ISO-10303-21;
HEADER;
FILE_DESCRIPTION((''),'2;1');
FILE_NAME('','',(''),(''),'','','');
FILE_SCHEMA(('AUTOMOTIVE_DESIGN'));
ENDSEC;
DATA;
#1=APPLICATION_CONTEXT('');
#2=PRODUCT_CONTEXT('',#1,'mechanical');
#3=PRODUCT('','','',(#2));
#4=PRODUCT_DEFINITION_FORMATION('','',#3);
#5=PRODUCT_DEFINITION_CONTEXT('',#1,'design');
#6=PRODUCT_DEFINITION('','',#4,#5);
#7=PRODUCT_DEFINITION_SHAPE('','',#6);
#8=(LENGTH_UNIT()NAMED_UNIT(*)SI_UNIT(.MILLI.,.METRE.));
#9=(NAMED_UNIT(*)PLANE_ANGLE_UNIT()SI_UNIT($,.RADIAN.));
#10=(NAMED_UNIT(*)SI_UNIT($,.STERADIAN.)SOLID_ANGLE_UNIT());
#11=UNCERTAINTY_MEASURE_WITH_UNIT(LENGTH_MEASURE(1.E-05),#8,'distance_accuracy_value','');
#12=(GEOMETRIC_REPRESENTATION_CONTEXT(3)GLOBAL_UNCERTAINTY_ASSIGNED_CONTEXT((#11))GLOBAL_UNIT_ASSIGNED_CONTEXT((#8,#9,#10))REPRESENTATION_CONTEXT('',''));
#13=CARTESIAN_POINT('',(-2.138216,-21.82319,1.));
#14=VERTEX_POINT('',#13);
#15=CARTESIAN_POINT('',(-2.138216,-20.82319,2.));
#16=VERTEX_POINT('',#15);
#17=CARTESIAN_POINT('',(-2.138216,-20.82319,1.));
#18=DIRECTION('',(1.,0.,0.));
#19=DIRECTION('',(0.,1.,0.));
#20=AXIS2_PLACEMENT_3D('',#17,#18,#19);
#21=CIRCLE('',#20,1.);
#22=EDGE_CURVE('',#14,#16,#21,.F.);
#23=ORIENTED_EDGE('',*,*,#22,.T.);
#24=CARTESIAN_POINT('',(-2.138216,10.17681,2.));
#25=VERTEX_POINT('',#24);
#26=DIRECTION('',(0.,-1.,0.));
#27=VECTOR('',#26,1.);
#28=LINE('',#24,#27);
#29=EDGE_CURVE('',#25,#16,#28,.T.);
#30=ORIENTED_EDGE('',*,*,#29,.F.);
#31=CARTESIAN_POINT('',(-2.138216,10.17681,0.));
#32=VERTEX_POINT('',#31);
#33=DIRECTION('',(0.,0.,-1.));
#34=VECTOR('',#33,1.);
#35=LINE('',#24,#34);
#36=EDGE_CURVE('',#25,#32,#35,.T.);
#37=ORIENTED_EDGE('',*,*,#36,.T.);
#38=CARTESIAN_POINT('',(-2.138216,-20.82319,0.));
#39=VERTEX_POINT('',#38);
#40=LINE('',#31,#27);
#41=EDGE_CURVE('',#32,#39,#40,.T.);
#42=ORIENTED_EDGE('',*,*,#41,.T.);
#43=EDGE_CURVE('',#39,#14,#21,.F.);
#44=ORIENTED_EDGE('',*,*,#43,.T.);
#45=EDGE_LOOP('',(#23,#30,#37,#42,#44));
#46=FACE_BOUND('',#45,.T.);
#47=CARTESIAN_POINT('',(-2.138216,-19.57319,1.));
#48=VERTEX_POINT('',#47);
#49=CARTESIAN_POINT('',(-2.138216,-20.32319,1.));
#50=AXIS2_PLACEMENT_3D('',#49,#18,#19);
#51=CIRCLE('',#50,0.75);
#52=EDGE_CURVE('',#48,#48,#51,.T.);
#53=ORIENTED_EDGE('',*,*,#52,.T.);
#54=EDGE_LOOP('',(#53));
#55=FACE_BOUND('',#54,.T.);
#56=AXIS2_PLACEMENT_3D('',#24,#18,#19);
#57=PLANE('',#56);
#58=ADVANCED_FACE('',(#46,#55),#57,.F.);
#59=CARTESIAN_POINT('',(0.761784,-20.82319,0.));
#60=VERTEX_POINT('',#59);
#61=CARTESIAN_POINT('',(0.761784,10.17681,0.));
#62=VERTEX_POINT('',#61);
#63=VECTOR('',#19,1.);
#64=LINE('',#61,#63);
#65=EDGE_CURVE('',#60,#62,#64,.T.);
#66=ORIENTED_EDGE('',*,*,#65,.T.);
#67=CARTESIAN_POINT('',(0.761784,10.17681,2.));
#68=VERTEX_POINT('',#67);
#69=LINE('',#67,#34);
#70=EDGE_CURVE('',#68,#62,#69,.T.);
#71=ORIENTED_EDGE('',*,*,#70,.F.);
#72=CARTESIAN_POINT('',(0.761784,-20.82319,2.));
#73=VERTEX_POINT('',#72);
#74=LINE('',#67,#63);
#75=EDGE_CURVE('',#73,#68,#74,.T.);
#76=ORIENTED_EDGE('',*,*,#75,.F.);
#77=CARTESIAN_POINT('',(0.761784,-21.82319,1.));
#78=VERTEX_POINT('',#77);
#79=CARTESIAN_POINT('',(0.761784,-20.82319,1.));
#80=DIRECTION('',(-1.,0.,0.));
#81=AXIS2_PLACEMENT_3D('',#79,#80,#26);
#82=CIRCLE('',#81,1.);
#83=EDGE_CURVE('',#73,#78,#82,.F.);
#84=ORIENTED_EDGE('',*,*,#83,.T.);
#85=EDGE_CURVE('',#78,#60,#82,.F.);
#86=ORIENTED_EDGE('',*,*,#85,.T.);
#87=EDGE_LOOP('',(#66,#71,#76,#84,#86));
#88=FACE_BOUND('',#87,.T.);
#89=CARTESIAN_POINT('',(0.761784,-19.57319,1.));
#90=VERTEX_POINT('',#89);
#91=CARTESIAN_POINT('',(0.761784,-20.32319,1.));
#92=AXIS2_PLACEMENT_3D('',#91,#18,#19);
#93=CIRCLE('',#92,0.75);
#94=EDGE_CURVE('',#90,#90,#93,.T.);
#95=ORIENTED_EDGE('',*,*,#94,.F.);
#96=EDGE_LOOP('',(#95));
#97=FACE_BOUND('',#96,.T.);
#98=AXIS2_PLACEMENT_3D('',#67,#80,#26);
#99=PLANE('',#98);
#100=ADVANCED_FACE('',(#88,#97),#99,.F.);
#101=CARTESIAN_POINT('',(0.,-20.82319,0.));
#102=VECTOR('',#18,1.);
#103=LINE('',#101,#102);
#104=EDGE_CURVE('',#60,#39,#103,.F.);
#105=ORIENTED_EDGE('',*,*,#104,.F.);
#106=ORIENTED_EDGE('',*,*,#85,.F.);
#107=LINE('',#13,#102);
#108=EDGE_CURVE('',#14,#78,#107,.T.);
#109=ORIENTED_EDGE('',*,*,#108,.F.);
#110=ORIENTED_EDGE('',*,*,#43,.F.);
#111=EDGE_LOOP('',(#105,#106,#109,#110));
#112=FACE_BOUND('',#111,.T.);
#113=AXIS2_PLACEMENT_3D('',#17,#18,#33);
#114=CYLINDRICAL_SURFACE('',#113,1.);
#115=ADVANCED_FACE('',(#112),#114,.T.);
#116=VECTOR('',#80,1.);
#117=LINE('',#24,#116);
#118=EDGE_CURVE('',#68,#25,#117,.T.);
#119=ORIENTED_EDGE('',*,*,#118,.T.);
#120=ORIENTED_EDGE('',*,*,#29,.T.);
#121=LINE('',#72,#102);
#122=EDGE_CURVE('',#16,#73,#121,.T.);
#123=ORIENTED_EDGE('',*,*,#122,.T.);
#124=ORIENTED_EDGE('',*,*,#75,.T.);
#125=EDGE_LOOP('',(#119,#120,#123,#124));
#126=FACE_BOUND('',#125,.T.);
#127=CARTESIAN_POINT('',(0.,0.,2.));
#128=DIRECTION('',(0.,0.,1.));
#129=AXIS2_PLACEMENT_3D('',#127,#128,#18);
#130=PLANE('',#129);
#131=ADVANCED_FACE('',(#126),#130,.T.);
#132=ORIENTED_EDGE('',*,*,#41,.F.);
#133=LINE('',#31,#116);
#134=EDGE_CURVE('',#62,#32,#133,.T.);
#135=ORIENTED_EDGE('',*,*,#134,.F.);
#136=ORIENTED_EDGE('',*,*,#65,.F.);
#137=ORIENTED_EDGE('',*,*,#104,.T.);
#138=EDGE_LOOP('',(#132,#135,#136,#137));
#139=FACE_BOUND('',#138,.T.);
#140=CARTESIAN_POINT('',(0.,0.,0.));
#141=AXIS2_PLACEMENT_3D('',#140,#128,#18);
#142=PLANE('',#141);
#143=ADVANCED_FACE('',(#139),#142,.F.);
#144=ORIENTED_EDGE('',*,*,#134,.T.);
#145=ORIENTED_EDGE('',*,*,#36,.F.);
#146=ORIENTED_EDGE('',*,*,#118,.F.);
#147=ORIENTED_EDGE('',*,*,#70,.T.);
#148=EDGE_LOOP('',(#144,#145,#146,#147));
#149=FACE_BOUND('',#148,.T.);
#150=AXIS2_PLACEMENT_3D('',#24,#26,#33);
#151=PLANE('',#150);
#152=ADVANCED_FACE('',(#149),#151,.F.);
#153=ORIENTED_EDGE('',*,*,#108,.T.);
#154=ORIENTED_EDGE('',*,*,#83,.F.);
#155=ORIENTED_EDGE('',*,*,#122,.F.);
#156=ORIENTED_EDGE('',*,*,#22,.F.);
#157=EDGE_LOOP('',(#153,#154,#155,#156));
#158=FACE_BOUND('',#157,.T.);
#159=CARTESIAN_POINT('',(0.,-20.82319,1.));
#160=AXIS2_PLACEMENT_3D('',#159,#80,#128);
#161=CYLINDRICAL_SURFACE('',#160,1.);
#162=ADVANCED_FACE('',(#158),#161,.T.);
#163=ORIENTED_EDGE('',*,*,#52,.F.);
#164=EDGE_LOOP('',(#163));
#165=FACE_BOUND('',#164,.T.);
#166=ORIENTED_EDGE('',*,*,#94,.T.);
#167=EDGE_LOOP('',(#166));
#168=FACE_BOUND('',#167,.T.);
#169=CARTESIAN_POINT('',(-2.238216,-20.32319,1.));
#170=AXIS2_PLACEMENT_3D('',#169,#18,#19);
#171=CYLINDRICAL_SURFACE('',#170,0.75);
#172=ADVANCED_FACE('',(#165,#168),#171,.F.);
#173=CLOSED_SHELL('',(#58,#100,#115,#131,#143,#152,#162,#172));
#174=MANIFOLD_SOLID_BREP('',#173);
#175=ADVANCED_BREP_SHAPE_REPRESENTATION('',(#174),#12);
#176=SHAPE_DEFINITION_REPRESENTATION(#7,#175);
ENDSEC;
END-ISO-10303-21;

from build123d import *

# Parameters (mm, degrees)
ESQUISSE1_W             = 2.9
ESQUISSE1_H             = 32
BOSS_EXTRU_1_DEPTH      = 2
CONG_1_R                = 1
ESQUISSE2_R             = 0.75
ENL_V_MAT_EXTRU_1_DEPTH = 3


with BuildPart() as part:
    # Esquisse1 → Boss.-Extru.1 (new body)
    with BuildSketch(Plane.XY):
        with Locations((-0.688215542, -5.823189522)):
            Rectangle(ESQUISSE1_W, ESQUISSE1_H)
    extrude(amount=BOSS_EXTRU_1_DEPTH)

    # Congé1
    cong_1_edges = [part.edges().sort_by_distance(p)[0] for p in [
        (-0.688215542, -21.823189522, 2),
        (-0.688215542, -21.823189522, 0),
    ]]
    fillet(cong_1_edges, radius=CONG_1_R - 0.0001)  # a hair under: the kernel refuses the full size

    # Esquisse2 → Enlèv. mat.-Extru.1 (cut)
    with BuildSketch(Plane(origin=(0.761784458, 0, 0), x_dir=(0, 0, -1), z_dir=(1, 0, 0))):
        with Locations(Location((-1, -20.323189522, 0), (0, 0, 90))):
            Circle(ESQUISSE2_R)
    extrude(amount=-ENL_V_MAT_EXTRU_1_DEPTH, mode=Mode.SUBTRACT)


solid = part.part
